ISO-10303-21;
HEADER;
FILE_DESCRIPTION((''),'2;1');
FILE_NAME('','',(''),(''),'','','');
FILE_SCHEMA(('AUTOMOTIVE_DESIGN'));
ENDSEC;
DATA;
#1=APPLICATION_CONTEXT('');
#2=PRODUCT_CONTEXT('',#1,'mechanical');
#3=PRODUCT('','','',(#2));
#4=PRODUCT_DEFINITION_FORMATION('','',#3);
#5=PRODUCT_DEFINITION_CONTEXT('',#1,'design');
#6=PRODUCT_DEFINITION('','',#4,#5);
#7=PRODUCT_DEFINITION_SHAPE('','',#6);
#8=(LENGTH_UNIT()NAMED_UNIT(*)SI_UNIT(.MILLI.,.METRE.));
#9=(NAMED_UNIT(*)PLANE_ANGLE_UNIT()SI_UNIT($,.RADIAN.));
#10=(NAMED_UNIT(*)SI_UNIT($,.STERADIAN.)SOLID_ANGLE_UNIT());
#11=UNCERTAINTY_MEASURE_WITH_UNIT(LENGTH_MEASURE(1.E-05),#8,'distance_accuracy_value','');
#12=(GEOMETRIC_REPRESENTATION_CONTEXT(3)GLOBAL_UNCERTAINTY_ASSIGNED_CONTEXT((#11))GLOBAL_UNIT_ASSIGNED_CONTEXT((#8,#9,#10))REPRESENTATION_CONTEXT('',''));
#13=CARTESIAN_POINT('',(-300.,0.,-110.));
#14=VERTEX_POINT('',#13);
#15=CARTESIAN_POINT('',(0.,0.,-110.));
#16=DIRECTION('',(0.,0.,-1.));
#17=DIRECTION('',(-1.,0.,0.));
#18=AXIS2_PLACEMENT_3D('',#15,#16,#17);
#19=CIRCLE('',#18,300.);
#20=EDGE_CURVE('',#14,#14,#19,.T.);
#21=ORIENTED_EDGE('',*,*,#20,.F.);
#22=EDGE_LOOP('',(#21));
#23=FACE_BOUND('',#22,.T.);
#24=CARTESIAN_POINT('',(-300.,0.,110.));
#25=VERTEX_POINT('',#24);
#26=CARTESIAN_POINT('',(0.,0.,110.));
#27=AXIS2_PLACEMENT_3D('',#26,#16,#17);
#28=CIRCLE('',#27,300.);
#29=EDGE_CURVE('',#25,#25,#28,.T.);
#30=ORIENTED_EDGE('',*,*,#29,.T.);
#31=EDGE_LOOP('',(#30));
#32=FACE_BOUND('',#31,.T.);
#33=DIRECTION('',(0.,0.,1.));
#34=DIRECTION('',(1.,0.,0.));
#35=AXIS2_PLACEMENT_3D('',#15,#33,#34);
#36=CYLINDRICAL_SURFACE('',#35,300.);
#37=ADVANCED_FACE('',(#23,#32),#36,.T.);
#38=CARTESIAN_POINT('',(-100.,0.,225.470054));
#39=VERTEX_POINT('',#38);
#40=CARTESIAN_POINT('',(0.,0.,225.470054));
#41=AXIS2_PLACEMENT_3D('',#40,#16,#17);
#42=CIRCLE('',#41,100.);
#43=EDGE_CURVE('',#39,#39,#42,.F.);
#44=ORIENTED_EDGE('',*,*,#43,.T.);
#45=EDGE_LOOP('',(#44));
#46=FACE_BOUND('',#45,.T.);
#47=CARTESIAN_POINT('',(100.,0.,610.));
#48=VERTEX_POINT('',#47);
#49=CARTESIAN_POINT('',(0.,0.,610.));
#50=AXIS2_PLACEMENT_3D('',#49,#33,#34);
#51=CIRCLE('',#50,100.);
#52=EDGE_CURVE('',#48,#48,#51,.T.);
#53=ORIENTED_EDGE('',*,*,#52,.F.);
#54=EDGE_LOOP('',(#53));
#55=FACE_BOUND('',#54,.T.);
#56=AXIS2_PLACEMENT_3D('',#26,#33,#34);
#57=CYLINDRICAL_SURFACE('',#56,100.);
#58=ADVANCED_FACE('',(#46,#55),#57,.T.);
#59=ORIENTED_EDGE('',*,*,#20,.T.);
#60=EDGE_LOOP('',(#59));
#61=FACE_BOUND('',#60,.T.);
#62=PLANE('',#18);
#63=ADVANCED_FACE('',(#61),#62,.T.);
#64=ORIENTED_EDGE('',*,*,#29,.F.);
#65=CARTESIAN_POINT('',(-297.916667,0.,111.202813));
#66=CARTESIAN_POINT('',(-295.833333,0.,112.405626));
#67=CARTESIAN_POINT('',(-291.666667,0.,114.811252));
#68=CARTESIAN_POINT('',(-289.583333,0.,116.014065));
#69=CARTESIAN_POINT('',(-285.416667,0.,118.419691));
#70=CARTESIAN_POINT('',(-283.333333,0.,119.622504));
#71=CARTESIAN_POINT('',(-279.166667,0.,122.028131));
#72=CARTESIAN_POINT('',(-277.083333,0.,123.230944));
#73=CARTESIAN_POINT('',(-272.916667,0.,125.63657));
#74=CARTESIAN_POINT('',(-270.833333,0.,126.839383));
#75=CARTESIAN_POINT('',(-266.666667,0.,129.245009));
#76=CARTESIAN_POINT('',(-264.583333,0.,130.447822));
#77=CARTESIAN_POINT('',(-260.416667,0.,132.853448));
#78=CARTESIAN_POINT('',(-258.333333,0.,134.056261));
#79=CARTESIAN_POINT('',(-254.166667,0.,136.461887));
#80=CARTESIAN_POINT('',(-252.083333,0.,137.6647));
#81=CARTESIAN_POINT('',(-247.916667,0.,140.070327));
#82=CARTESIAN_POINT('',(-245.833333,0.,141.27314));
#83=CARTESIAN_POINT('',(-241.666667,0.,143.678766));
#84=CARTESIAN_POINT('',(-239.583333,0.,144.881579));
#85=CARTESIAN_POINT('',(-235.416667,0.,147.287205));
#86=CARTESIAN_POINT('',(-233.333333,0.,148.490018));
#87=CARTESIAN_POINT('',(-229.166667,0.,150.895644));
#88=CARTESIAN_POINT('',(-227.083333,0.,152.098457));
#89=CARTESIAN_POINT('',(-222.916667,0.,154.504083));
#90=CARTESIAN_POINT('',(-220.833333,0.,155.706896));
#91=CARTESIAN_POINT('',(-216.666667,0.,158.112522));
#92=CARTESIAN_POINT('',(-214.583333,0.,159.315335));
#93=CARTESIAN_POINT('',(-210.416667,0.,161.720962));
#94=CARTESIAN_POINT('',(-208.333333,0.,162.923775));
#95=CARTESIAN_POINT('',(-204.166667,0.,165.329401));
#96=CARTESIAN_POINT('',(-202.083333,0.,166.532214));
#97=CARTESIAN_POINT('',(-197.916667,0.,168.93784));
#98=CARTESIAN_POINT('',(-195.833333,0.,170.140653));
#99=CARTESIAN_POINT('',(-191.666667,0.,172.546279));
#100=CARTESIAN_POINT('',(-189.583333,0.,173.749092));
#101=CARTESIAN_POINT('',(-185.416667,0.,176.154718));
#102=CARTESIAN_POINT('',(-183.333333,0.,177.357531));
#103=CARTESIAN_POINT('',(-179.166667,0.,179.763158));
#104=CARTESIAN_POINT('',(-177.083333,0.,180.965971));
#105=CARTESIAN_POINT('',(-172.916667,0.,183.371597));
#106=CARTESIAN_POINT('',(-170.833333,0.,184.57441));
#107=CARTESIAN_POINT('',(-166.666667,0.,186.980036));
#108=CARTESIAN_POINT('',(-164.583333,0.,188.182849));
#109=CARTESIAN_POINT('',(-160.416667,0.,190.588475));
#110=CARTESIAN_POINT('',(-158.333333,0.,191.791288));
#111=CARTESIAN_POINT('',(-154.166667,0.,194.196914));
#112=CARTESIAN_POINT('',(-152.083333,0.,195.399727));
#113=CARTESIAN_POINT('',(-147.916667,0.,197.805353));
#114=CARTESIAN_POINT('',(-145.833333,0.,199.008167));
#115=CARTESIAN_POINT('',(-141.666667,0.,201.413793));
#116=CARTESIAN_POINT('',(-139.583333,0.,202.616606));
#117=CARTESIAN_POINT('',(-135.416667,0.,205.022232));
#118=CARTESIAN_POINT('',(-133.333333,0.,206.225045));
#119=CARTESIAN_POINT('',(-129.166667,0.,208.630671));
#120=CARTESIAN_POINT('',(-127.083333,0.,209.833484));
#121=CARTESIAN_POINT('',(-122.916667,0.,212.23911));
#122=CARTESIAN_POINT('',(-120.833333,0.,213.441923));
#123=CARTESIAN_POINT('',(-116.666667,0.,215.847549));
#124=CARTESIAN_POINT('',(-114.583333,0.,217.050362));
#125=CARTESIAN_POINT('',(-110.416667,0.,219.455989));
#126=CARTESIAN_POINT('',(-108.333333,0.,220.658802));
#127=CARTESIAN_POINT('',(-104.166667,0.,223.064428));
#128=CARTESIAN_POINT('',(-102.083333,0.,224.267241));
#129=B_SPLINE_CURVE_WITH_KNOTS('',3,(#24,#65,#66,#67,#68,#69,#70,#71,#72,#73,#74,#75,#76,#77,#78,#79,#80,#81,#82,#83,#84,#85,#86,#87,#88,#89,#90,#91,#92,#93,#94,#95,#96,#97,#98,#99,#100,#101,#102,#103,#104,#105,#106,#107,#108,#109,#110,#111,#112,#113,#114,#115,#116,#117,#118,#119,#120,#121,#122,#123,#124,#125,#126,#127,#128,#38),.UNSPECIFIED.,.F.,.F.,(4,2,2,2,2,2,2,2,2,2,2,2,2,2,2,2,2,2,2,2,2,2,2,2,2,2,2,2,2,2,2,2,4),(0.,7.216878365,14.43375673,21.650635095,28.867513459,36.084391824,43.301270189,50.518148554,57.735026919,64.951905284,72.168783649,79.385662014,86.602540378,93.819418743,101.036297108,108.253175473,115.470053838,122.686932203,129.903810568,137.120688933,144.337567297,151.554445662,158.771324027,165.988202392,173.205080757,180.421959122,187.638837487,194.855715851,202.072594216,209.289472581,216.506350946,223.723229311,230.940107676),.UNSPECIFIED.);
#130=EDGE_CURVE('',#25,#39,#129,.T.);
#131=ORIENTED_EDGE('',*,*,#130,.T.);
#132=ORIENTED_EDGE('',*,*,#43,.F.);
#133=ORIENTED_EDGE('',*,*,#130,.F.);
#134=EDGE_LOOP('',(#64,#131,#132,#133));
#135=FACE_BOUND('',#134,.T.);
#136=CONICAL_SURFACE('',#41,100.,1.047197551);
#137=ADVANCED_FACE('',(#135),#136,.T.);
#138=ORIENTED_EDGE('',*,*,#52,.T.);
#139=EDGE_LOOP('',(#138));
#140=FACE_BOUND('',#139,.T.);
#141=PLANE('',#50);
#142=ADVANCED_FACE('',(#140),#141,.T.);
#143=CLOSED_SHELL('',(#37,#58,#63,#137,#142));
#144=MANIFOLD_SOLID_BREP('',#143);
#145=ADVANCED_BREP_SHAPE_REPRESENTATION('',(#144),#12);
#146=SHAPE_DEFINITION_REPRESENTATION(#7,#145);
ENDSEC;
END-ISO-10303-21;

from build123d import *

# Parameters (mm, degrees)
BOSS_EXTRUDE1_DEPTH      = 250
BOSS_EXTRUDE1_DEPTH_BACK = 250
SKETCH1_R                = 100
SKETCH2_R                = 300
BOSS_EXTRUDE2_DEPTH      = 220
CHAMFER1_SIZE2           = 115.470053838
CHAMFER1_SIZE            = 200


with BuildPart() as part:
    # Sketch1 → Boss-Extrude1 (new, two sides: drawn at the far end of the back side and taken through both)
    with BuildSketch(Plane.XY.offset(-BOSS_EXTRUDE1_DEPTH_BACK)):
        Circle(SKETCH1_R)
    extrude(amount=BOSS_EXTRUDE1_DEPTH + BOSS_EXTRUDE1_DEPTH_BACK)

    # Sketch2 → Boss-Extrude2 (add)
    with BuildSketch(Plane(origin=(0, 0, -250), x_dir=(-1, 0, 0), z_dir=(0, 0, -1))):
        Circle(SKETCH2_R)
    extrude(amount=BOSS_EXTRUDE2_DEPTH)

    # Chamfer1
    chamfer1_edges = [part.edges().sort_by_distance(p)[0] for p in [
        (-100, 0, -250),
    ]]
    chamfer1_side = [part.faces().sort_by_distance(p)[0] for p in [
        (-102.309401077, 0, -250),
    ]]
    chamfer(chamfer1_edges, length=CHAMFER1_SIZE - 0.0001, length2=CHAMFER1_SIZE2 - 0.0001, reference=chamfer1_side[0])  # a hair under: the kernel refuses the full size


with BuildPart() as part_1:
    # Body-Move/Copy1: moved
    add(part.part.moved(Location((0, 0, 360))))


solid = part_1.part
